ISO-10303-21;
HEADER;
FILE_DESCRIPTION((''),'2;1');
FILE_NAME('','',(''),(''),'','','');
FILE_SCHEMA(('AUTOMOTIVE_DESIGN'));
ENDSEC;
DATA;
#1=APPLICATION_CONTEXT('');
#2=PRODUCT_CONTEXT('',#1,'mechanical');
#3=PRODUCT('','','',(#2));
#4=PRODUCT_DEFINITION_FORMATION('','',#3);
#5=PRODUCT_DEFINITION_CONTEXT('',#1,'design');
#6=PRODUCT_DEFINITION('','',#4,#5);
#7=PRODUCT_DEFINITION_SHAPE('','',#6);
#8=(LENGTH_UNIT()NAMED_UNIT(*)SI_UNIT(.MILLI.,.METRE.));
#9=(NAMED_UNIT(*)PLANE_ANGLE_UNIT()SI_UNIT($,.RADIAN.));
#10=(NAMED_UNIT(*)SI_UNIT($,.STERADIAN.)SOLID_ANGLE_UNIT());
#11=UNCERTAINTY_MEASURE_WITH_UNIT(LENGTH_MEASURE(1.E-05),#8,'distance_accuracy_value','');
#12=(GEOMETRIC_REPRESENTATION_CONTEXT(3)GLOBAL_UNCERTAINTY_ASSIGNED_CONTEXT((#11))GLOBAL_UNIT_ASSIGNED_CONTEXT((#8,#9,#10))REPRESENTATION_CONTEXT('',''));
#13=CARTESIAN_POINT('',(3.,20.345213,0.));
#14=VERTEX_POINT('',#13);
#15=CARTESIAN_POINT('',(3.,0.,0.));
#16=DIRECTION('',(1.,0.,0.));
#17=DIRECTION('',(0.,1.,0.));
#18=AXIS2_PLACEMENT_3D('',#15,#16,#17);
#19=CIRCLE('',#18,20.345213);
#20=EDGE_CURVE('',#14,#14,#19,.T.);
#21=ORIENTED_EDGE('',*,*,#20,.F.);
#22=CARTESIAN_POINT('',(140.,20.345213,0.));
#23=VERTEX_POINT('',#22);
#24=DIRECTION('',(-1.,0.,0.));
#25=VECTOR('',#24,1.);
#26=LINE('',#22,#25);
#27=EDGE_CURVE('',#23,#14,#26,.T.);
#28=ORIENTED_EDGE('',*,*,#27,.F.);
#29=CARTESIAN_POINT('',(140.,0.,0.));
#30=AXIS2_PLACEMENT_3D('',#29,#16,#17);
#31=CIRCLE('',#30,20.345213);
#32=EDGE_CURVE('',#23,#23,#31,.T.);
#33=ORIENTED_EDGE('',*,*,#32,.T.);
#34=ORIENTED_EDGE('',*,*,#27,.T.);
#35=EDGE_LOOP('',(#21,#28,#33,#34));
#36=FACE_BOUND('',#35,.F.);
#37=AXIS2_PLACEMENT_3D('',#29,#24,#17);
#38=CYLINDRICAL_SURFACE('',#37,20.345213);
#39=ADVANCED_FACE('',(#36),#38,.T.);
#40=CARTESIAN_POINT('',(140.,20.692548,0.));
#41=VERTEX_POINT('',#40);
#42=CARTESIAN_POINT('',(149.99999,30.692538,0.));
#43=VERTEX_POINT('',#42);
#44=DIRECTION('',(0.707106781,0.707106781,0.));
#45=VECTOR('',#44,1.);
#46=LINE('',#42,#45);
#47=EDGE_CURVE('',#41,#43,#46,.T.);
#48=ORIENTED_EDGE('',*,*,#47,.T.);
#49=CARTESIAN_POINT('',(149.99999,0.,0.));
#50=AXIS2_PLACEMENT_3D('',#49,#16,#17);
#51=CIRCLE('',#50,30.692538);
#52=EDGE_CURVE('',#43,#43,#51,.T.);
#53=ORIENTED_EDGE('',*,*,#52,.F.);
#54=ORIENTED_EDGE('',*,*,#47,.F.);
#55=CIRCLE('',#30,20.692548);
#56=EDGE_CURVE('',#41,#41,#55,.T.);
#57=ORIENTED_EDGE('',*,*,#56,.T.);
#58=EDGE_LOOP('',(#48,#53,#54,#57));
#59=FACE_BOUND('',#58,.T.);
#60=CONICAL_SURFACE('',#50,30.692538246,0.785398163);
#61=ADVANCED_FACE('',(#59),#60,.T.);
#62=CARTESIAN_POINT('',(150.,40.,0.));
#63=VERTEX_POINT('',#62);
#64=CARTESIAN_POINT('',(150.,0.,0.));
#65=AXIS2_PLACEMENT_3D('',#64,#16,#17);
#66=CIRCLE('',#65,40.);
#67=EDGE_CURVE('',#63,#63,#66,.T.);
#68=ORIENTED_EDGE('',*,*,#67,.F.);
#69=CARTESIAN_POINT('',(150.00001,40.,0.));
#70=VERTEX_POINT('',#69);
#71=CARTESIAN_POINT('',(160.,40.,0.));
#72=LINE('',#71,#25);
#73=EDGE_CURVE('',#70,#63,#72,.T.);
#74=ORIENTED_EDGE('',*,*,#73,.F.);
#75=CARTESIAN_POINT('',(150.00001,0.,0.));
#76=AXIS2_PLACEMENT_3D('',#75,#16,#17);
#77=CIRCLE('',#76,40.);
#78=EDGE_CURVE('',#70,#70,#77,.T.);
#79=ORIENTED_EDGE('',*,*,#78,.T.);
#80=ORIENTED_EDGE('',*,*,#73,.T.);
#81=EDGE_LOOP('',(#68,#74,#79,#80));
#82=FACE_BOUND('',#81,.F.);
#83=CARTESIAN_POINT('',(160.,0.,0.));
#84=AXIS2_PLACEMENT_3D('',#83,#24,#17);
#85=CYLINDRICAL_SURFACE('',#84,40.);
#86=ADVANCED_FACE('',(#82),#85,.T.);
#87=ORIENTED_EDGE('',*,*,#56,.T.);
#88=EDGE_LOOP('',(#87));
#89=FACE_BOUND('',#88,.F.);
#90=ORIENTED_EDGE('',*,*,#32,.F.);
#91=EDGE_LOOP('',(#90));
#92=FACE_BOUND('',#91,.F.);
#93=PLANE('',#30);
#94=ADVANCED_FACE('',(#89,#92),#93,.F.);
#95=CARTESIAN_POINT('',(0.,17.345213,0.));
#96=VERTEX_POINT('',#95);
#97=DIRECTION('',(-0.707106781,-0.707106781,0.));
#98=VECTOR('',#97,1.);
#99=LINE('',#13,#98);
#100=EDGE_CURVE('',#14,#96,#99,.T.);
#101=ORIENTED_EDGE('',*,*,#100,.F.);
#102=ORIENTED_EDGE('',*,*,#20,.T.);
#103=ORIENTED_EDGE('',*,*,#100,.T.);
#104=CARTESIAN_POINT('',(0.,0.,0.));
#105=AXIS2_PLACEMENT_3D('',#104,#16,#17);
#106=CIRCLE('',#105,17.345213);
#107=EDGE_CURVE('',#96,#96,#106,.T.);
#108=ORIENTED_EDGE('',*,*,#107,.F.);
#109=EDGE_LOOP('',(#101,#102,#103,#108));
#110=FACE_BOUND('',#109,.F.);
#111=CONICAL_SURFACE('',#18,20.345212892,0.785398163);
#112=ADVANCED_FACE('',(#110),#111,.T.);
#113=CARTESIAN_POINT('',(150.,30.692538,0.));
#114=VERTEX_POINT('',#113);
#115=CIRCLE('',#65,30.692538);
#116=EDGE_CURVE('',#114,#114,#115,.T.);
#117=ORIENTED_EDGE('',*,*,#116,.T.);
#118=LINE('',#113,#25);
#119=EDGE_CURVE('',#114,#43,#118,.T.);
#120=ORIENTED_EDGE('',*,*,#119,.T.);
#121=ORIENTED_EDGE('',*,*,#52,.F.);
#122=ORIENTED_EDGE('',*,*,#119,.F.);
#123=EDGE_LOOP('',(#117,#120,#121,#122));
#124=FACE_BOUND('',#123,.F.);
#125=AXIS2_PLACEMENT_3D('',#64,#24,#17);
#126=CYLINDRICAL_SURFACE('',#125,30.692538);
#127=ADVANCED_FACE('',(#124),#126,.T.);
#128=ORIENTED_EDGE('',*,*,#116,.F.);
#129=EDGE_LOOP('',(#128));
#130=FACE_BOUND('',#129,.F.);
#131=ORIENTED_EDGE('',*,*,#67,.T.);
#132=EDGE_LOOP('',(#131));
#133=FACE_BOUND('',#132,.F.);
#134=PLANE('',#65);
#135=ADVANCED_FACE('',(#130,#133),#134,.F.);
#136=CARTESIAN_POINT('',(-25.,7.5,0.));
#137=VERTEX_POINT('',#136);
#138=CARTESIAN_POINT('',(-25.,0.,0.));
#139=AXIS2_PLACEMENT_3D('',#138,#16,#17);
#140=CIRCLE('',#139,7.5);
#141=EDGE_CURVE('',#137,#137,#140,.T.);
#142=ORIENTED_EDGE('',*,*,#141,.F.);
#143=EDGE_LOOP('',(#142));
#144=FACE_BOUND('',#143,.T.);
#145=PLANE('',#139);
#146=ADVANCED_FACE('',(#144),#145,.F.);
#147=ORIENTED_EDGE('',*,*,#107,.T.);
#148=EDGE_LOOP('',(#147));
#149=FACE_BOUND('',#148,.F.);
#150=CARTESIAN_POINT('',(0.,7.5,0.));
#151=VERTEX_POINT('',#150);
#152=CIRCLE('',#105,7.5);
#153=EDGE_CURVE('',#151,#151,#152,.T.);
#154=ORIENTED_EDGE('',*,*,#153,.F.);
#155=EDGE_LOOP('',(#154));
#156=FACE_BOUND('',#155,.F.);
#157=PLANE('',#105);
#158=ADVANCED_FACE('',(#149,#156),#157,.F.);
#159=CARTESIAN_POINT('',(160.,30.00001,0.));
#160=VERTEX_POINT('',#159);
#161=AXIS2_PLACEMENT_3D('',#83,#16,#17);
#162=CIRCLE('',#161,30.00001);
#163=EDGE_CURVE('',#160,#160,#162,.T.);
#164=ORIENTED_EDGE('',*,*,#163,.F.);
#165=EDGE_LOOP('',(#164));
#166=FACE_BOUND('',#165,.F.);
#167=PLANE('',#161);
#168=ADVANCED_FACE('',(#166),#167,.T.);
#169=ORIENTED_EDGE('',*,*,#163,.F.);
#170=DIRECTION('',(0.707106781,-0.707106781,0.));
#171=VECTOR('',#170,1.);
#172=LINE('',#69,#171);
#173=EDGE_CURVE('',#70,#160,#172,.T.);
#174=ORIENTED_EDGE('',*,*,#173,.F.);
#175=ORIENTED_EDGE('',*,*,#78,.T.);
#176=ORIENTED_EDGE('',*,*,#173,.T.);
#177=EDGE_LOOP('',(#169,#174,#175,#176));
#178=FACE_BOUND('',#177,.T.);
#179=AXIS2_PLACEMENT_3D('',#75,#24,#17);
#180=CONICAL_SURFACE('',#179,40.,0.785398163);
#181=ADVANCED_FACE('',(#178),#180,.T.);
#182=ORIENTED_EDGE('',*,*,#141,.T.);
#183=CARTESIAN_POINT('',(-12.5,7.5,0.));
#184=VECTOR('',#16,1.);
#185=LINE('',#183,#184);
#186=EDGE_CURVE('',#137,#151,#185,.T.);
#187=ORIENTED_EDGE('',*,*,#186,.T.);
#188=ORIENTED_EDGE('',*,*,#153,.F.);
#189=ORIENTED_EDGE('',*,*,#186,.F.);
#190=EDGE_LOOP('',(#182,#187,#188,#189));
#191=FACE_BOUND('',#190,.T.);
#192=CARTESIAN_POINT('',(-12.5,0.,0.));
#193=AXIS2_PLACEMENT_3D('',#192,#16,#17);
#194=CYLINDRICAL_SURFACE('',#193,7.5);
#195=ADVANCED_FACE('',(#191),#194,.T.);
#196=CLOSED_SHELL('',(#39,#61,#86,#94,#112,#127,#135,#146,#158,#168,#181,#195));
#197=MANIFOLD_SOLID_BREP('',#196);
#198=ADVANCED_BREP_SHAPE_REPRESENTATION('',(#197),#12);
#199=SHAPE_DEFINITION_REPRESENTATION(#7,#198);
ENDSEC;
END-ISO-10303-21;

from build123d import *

# Parameters (mm, degrees)
F0_W     = 25
F0_H     = 7.5
F2_SIZE2 = 3
F2_SIZE  = 3
F3_SIZE2 = 9.99999
F3_SIZE  = 9.99999
F4_SIZE2 = 9.99999
F4_SIZE  = 9.99999


# Not quite as in the source:
# - a fillet or chamfer is up to 0.001 mm smaller than in the source, because OpenCascade refuses the exact size


with BuildPart() as f1:
    # F0 (on Top) → F1 (revolve)
    with BuildSketch(Plane.XY):
        with Locations((-12.5, 3.75)):
            Rectangle(F0_W, F0_H)
        Polygon((0, 7.5), (0, 0), (140, 0), (140, 20.3452128917), (0, 20.3452128917), align=None)
        Polygon((140, 20.3452128917), (140, 0), (150, 0), (150, 30.6925382465), (140, 30.6925382465), align=None)
        Polygon((150, 30.6925382465), (150, 0), (160, 0), (160, 40), (150, 40), align=None)
    revolve(axis=Axis((70, 0, 0), (1, 0, 0)))

    # F2
    f2_edges = [f1.edges().sort_by_distance(p)[0] for p in [
        (0, -20.345213, 0),
    ]]
    chamfer(f2_edges, length=F2_SIZE, length2=F2_SIZE2)

    # F3 (size 10 and 10 in the source; OpenCascade refuses exactly that, so slightly less here)
    f3_edges = [f1.edges().sort_by_distance(p)[0] for p in [
        (140, -30.692538, 0),
    ]]
    chamfer(f3_edges, length=F3_SIZE, length2=F3_SIZE2)

    # F4 (size 10 and 10 in the source; OpenCascade refuses exactly that, so slightly less here)
    f4_edges = [f1.edges().sort_by_distance(p)[0] for p in [
        (160, -40, 0),
    ]]
    chamfer(f4_edges, length=F4_SIZE, length2=F4_SIZE2)


solid = f1.part
